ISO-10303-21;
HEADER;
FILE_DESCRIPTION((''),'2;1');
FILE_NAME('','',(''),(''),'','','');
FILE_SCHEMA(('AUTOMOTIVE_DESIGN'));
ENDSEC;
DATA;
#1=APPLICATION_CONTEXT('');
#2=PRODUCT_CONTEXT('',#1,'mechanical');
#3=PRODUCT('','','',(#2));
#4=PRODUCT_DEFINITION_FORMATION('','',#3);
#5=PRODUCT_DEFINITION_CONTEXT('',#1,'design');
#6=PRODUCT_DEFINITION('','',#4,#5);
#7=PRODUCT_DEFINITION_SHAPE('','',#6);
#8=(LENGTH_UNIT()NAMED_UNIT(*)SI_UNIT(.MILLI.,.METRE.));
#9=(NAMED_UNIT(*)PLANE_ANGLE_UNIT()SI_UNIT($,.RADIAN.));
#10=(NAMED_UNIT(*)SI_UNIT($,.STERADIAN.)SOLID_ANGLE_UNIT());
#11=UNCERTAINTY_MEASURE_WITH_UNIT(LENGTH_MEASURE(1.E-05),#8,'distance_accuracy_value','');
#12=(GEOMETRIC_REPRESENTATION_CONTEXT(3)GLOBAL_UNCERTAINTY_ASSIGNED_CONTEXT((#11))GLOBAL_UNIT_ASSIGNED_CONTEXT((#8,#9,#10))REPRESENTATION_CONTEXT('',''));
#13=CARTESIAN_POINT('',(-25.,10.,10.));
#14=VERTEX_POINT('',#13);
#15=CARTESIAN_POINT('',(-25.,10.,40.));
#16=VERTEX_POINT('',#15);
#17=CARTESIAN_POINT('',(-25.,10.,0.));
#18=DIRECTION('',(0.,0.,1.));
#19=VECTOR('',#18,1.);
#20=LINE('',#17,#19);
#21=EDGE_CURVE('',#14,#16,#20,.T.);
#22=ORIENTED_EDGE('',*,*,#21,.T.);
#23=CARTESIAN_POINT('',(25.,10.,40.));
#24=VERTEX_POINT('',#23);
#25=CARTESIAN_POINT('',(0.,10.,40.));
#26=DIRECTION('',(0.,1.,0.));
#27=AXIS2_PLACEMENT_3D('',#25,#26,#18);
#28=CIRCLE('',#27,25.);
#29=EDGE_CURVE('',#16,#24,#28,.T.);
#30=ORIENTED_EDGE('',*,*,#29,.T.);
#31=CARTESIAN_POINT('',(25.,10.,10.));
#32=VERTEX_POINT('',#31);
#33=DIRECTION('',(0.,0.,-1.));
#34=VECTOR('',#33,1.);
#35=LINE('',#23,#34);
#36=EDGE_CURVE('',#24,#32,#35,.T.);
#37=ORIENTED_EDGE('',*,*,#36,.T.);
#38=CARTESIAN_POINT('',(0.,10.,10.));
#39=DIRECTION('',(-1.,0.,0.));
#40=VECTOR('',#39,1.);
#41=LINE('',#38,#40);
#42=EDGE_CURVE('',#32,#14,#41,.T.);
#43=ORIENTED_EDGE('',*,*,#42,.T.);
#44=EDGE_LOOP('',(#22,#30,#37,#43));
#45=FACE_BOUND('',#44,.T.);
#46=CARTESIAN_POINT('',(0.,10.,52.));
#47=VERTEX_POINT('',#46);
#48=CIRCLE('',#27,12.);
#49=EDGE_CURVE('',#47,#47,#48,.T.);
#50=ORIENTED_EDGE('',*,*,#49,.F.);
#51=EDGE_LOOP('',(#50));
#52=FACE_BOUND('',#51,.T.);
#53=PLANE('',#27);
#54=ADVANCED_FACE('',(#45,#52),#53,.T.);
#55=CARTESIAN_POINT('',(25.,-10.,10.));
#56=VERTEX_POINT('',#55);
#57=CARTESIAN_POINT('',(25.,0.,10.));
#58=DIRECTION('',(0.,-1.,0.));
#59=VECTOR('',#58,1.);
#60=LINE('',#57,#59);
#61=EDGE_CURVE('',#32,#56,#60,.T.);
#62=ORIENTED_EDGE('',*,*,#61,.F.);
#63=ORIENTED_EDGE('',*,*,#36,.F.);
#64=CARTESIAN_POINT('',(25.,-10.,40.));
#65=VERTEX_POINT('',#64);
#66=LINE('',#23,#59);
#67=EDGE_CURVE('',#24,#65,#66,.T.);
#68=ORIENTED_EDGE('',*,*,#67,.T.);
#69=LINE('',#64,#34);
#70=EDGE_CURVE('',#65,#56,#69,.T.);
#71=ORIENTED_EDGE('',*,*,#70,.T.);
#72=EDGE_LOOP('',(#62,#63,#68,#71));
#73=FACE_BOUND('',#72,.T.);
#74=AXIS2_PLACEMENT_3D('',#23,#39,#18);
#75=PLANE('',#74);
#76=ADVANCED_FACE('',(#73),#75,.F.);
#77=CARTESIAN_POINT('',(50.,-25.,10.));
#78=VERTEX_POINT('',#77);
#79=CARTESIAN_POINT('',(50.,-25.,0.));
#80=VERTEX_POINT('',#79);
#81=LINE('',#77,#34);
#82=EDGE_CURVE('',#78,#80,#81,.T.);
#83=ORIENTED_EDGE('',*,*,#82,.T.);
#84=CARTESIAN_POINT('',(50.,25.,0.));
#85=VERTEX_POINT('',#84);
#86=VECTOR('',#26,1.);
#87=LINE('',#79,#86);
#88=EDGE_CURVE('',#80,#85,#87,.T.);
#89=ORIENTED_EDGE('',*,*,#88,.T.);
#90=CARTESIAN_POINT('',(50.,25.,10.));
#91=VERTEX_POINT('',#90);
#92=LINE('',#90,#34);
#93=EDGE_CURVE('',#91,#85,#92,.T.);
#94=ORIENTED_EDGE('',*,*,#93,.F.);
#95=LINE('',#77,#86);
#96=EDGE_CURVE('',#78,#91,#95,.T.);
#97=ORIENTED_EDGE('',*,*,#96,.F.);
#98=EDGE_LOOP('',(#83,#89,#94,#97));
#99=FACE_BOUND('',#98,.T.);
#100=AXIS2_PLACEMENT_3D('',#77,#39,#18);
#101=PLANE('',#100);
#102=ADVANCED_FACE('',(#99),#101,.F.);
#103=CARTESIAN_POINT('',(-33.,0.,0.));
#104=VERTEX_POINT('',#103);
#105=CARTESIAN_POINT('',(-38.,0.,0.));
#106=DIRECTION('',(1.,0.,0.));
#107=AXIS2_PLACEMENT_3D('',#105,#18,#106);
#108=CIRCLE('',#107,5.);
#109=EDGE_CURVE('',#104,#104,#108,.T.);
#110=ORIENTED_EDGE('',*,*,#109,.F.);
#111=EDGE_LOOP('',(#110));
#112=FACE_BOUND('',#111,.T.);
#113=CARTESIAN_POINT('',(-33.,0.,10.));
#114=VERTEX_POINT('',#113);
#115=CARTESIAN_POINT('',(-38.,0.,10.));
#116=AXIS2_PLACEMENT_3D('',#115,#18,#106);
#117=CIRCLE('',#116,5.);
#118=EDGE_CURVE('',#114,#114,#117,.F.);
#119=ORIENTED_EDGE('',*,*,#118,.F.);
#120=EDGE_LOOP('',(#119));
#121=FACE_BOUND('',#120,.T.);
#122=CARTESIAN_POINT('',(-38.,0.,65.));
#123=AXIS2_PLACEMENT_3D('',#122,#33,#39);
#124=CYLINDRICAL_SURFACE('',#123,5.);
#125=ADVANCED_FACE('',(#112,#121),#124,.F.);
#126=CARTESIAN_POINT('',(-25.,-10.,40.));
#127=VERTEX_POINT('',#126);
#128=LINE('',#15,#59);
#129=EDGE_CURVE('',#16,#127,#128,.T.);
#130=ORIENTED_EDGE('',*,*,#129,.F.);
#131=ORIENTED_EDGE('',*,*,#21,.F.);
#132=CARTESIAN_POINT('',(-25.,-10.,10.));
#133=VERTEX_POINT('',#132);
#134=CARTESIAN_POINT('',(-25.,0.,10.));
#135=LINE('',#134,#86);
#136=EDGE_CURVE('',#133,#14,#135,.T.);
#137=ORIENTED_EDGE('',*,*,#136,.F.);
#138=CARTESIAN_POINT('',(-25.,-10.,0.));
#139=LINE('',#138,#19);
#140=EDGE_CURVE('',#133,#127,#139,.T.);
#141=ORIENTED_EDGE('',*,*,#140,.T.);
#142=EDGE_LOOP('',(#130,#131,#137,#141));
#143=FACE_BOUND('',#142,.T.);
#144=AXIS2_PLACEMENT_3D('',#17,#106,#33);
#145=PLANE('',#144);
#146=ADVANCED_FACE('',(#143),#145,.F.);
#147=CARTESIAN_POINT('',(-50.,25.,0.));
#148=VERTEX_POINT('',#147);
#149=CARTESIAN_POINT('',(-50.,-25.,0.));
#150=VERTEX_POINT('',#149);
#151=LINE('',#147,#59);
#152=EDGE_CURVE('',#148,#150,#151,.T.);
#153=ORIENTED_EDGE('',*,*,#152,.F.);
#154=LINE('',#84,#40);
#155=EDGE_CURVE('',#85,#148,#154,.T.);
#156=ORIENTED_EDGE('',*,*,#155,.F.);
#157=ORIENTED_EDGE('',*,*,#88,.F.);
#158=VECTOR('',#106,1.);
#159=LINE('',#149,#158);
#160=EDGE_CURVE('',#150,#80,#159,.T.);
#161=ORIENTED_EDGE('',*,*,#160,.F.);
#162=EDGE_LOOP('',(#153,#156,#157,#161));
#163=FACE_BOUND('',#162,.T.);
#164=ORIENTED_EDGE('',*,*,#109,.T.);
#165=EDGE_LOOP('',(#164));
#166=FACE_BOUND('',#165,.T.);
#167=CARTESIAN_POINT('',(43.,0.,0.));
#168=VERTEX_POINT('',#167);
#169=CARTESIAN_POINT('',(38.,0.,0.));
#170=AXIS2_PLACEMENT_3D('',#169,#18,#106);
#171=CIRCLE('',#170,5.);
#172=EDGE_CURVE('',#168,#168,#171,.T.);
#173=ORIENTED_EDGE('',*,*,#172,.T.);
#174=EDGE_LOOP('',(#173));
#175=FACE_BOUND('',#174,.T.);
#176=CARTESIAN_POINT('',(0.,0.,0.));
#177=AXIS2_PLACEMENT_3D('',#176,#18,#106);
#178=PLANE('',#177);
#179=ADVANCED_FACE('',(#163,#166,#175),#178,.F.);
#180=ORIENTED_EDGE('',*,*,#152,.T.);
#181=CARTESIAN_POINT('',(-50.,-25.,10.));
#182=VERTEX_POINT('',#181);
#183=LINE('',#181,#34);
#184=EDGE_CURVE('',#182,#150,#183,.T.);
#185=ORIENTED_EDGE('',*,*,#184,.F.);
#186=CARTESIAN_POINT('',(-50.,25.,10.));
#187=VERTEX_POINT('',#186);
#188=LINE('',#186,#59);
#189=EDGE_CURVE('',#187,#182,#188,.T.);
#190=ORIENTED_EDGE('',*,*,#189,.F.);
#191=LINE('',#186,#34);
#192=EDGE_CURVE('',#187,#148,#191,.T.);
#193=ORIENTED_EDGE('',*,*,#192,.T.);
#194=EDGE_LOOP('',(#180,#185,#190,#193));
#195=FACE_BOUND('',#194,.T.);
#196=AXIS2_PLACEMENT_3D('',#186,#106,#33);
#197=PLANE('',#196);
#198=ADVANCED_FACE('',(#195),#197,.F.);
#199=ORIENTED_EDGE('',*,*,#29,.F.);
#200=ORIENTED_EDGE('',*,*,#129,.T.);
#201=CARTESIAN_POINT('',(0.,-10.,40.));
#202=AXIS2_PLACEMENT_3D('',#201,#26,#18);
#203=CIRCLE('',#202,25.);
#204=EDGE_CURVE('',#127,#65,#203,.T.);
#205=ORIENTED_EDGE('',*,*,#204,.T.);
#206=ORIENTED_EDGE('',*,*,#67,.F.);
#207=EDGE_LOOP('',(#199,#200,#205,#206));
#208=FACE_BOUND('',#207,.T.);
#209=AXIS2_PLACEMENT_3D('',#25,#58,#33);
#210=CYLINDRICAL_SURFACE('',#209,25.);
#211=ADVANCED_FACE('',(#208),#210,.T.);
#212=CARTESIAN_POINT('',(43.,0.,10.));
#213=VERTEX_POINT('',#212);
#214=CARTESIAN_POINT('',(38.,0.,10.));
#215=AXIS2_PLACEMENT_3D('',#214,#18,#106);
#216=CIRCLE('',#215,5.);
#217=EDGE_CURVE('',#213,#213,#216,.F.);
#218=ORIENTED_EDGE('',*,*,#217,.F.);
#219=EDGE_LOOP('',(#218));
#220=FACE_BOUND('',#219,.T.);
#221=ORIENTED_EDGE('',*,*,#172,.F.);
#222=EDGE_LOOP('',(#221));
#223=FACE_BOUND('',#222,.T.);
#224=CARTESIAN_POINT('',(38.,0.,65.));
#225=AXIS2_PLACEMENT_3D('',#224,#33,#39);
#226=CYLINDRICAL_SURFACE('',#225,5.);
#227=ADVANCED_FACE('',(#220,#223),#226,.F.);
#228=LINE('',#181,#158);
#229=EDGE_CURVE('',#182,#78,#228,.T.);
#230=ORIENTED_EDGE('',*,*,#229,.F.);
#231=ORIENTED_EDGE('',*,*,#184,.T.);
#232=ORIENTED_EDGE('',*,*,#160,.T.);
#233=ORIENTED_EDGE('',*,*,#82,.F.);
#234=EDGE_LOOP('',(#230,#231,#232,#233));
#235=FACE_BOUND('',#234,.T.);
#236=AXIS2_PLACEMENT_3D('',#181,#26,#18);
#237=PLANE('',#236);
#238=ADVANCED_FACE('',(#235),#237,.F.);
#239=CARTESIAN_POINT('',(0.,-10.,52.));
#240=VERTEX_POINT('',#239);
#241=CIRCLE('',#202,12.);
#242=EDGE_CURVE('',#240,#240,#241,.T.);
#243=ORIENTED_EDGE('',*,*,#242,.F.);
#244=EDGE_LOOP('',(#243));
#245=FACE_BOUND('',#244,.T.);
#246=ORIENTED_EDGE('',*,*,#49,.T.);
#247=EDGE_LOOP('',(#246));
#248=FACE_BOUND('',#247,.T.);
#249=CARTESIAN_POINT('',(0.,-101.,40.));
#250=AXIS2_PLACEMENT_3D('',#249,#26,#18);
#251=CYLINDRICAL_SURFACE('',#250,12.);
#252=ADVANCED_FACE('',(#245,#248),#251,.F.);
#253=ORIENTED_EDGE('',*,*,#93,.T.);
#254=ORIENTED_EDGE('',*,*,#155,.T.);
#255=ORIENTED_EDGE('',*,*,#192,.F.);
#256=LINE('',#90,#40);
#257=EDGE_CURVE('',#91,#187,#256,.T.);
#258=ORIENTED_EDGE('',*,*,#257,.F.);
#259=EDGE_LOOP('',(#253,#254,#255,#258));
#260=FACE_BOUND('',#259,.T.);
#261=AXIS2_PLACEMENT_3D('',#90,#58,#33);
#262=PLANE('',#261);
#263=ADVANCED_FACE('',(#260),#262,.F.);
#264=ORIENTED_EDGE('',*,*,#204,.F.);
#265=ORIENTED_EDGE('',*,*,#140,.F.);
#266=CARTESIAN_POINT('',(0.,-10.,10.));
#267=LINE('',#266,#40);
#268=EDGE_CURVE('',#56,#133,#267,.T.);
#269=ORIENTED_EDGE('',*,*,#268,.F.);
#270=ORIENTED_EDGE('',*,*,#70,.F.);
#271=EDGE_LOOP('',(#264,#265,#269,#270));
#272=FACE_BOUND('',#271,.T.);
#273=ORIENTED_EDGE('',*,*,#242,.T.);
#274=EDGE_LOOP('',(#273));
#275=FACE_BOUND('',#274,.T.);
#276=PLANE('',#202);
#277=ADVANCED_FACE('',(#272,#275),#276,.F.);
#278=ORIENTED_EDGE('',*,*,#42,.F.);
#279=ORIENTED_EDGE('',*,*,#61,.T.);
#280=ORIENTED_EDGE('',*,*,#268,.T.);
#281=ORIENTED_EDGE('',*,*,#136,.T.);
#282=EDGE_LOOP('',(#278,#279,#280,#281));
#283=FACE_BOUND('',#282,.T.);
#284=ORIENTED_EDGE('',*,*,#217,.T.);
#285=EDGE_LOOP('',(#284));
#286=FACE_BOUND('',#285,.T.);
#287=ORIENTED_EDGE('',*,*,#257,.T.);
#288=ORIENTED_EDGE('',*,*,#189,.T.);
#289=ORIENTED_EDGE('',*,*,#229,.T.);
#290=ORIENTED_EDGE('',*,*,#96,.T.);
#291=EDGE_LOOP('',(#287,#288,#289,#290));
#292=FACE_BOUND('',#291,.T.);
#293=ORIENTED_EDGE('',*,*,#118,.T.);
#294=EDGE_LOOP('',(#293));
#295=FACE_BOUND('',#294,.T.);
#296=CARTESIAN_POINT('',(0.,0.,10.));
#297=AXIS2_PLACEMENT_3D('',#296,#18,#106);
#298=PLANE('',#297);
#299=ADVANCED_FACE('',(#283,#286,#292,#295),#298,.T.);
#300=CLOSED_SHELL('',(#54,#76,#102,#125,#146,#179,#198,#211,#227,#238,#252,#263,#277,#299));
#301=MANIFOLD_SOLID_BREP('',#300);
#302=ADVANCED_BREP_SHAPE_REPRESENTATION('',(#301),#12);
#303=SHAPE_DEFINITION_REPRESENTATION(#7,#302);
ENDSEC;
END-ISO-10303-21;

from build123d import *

# Parameters (mm, degrees)
SKETCH_1_W          = 100
SKETCH_1_H          = 50
EXTRUDE_1_DEPTH     = 10
EXTRUDE_START       = -10
EXTRUDE_2_DEPTH     = 20
SKETCH_3_R          = 12
CUT_EXTRUDE_1_DEPTH = 101
SKETCH_4_R          = 5
CUT_EXTRUDE_2_DEPTH = 86.732140997


# Read off the part's stored shape, not the designer's step: 凸台-拉伸2
with BuildPart() as part:
    # 草图1 → 凸台-拉伸1 (new body)
    with BuildSketch(Plane.XY):
        Rectangle(SKETCH_1_W, SKETCH_1_H)
    extrude(amount=EXTRUDE_1_DEPTH)

    # 凸台-拉伸2 outline → 凸台-拉伸2 (add)
    with BuildSketch(Plane(origin=(0, 0, 0), x_dir=(1, 0, 0), z_dir=(0, 1, 0)).offset(EXTRUDE_START)):
        with BuildLine():
            Line((-25, -10), (-25, -40))
            ThreePointArc((-25, -40), (0, -65), (25, -40))
            Line((25, -40), (25, -10))
            Line((25, -10), (-25, -10))
        make_face()
    extrude(amount=EXTRUDE_2_DEPTH)

    # 草图3 → 切除-拉伸1 (cut, symmetric)
    with BuildSketch(Plane(origin=(0, 0, 0), x_dir=(1, 0, 0), z_dir=(0, 1, 0))):
        with Locations(Location((0, -40, 0), (0, 0, 270))):
            Circle(SKETCH_3_R)
    extrude(amount=CUT_EXTRUDE_1_DEPTH, both=True, mode=Mode.SUBTRACT)

    # 草图4 → 切除-拉伸2 (cut, through all)
    with BuildSketch(Plane.XY):
        with Locations((-38, 0)):
            Circle(SKETCH_4_R)
        with Locations((38, 0)):
            Circle(SKETCH_4_R)
    extrude(amount=CUT_EXTRUDE_2_DEPTH, mode=Mode.SUBTRACT)


solid = part.part
